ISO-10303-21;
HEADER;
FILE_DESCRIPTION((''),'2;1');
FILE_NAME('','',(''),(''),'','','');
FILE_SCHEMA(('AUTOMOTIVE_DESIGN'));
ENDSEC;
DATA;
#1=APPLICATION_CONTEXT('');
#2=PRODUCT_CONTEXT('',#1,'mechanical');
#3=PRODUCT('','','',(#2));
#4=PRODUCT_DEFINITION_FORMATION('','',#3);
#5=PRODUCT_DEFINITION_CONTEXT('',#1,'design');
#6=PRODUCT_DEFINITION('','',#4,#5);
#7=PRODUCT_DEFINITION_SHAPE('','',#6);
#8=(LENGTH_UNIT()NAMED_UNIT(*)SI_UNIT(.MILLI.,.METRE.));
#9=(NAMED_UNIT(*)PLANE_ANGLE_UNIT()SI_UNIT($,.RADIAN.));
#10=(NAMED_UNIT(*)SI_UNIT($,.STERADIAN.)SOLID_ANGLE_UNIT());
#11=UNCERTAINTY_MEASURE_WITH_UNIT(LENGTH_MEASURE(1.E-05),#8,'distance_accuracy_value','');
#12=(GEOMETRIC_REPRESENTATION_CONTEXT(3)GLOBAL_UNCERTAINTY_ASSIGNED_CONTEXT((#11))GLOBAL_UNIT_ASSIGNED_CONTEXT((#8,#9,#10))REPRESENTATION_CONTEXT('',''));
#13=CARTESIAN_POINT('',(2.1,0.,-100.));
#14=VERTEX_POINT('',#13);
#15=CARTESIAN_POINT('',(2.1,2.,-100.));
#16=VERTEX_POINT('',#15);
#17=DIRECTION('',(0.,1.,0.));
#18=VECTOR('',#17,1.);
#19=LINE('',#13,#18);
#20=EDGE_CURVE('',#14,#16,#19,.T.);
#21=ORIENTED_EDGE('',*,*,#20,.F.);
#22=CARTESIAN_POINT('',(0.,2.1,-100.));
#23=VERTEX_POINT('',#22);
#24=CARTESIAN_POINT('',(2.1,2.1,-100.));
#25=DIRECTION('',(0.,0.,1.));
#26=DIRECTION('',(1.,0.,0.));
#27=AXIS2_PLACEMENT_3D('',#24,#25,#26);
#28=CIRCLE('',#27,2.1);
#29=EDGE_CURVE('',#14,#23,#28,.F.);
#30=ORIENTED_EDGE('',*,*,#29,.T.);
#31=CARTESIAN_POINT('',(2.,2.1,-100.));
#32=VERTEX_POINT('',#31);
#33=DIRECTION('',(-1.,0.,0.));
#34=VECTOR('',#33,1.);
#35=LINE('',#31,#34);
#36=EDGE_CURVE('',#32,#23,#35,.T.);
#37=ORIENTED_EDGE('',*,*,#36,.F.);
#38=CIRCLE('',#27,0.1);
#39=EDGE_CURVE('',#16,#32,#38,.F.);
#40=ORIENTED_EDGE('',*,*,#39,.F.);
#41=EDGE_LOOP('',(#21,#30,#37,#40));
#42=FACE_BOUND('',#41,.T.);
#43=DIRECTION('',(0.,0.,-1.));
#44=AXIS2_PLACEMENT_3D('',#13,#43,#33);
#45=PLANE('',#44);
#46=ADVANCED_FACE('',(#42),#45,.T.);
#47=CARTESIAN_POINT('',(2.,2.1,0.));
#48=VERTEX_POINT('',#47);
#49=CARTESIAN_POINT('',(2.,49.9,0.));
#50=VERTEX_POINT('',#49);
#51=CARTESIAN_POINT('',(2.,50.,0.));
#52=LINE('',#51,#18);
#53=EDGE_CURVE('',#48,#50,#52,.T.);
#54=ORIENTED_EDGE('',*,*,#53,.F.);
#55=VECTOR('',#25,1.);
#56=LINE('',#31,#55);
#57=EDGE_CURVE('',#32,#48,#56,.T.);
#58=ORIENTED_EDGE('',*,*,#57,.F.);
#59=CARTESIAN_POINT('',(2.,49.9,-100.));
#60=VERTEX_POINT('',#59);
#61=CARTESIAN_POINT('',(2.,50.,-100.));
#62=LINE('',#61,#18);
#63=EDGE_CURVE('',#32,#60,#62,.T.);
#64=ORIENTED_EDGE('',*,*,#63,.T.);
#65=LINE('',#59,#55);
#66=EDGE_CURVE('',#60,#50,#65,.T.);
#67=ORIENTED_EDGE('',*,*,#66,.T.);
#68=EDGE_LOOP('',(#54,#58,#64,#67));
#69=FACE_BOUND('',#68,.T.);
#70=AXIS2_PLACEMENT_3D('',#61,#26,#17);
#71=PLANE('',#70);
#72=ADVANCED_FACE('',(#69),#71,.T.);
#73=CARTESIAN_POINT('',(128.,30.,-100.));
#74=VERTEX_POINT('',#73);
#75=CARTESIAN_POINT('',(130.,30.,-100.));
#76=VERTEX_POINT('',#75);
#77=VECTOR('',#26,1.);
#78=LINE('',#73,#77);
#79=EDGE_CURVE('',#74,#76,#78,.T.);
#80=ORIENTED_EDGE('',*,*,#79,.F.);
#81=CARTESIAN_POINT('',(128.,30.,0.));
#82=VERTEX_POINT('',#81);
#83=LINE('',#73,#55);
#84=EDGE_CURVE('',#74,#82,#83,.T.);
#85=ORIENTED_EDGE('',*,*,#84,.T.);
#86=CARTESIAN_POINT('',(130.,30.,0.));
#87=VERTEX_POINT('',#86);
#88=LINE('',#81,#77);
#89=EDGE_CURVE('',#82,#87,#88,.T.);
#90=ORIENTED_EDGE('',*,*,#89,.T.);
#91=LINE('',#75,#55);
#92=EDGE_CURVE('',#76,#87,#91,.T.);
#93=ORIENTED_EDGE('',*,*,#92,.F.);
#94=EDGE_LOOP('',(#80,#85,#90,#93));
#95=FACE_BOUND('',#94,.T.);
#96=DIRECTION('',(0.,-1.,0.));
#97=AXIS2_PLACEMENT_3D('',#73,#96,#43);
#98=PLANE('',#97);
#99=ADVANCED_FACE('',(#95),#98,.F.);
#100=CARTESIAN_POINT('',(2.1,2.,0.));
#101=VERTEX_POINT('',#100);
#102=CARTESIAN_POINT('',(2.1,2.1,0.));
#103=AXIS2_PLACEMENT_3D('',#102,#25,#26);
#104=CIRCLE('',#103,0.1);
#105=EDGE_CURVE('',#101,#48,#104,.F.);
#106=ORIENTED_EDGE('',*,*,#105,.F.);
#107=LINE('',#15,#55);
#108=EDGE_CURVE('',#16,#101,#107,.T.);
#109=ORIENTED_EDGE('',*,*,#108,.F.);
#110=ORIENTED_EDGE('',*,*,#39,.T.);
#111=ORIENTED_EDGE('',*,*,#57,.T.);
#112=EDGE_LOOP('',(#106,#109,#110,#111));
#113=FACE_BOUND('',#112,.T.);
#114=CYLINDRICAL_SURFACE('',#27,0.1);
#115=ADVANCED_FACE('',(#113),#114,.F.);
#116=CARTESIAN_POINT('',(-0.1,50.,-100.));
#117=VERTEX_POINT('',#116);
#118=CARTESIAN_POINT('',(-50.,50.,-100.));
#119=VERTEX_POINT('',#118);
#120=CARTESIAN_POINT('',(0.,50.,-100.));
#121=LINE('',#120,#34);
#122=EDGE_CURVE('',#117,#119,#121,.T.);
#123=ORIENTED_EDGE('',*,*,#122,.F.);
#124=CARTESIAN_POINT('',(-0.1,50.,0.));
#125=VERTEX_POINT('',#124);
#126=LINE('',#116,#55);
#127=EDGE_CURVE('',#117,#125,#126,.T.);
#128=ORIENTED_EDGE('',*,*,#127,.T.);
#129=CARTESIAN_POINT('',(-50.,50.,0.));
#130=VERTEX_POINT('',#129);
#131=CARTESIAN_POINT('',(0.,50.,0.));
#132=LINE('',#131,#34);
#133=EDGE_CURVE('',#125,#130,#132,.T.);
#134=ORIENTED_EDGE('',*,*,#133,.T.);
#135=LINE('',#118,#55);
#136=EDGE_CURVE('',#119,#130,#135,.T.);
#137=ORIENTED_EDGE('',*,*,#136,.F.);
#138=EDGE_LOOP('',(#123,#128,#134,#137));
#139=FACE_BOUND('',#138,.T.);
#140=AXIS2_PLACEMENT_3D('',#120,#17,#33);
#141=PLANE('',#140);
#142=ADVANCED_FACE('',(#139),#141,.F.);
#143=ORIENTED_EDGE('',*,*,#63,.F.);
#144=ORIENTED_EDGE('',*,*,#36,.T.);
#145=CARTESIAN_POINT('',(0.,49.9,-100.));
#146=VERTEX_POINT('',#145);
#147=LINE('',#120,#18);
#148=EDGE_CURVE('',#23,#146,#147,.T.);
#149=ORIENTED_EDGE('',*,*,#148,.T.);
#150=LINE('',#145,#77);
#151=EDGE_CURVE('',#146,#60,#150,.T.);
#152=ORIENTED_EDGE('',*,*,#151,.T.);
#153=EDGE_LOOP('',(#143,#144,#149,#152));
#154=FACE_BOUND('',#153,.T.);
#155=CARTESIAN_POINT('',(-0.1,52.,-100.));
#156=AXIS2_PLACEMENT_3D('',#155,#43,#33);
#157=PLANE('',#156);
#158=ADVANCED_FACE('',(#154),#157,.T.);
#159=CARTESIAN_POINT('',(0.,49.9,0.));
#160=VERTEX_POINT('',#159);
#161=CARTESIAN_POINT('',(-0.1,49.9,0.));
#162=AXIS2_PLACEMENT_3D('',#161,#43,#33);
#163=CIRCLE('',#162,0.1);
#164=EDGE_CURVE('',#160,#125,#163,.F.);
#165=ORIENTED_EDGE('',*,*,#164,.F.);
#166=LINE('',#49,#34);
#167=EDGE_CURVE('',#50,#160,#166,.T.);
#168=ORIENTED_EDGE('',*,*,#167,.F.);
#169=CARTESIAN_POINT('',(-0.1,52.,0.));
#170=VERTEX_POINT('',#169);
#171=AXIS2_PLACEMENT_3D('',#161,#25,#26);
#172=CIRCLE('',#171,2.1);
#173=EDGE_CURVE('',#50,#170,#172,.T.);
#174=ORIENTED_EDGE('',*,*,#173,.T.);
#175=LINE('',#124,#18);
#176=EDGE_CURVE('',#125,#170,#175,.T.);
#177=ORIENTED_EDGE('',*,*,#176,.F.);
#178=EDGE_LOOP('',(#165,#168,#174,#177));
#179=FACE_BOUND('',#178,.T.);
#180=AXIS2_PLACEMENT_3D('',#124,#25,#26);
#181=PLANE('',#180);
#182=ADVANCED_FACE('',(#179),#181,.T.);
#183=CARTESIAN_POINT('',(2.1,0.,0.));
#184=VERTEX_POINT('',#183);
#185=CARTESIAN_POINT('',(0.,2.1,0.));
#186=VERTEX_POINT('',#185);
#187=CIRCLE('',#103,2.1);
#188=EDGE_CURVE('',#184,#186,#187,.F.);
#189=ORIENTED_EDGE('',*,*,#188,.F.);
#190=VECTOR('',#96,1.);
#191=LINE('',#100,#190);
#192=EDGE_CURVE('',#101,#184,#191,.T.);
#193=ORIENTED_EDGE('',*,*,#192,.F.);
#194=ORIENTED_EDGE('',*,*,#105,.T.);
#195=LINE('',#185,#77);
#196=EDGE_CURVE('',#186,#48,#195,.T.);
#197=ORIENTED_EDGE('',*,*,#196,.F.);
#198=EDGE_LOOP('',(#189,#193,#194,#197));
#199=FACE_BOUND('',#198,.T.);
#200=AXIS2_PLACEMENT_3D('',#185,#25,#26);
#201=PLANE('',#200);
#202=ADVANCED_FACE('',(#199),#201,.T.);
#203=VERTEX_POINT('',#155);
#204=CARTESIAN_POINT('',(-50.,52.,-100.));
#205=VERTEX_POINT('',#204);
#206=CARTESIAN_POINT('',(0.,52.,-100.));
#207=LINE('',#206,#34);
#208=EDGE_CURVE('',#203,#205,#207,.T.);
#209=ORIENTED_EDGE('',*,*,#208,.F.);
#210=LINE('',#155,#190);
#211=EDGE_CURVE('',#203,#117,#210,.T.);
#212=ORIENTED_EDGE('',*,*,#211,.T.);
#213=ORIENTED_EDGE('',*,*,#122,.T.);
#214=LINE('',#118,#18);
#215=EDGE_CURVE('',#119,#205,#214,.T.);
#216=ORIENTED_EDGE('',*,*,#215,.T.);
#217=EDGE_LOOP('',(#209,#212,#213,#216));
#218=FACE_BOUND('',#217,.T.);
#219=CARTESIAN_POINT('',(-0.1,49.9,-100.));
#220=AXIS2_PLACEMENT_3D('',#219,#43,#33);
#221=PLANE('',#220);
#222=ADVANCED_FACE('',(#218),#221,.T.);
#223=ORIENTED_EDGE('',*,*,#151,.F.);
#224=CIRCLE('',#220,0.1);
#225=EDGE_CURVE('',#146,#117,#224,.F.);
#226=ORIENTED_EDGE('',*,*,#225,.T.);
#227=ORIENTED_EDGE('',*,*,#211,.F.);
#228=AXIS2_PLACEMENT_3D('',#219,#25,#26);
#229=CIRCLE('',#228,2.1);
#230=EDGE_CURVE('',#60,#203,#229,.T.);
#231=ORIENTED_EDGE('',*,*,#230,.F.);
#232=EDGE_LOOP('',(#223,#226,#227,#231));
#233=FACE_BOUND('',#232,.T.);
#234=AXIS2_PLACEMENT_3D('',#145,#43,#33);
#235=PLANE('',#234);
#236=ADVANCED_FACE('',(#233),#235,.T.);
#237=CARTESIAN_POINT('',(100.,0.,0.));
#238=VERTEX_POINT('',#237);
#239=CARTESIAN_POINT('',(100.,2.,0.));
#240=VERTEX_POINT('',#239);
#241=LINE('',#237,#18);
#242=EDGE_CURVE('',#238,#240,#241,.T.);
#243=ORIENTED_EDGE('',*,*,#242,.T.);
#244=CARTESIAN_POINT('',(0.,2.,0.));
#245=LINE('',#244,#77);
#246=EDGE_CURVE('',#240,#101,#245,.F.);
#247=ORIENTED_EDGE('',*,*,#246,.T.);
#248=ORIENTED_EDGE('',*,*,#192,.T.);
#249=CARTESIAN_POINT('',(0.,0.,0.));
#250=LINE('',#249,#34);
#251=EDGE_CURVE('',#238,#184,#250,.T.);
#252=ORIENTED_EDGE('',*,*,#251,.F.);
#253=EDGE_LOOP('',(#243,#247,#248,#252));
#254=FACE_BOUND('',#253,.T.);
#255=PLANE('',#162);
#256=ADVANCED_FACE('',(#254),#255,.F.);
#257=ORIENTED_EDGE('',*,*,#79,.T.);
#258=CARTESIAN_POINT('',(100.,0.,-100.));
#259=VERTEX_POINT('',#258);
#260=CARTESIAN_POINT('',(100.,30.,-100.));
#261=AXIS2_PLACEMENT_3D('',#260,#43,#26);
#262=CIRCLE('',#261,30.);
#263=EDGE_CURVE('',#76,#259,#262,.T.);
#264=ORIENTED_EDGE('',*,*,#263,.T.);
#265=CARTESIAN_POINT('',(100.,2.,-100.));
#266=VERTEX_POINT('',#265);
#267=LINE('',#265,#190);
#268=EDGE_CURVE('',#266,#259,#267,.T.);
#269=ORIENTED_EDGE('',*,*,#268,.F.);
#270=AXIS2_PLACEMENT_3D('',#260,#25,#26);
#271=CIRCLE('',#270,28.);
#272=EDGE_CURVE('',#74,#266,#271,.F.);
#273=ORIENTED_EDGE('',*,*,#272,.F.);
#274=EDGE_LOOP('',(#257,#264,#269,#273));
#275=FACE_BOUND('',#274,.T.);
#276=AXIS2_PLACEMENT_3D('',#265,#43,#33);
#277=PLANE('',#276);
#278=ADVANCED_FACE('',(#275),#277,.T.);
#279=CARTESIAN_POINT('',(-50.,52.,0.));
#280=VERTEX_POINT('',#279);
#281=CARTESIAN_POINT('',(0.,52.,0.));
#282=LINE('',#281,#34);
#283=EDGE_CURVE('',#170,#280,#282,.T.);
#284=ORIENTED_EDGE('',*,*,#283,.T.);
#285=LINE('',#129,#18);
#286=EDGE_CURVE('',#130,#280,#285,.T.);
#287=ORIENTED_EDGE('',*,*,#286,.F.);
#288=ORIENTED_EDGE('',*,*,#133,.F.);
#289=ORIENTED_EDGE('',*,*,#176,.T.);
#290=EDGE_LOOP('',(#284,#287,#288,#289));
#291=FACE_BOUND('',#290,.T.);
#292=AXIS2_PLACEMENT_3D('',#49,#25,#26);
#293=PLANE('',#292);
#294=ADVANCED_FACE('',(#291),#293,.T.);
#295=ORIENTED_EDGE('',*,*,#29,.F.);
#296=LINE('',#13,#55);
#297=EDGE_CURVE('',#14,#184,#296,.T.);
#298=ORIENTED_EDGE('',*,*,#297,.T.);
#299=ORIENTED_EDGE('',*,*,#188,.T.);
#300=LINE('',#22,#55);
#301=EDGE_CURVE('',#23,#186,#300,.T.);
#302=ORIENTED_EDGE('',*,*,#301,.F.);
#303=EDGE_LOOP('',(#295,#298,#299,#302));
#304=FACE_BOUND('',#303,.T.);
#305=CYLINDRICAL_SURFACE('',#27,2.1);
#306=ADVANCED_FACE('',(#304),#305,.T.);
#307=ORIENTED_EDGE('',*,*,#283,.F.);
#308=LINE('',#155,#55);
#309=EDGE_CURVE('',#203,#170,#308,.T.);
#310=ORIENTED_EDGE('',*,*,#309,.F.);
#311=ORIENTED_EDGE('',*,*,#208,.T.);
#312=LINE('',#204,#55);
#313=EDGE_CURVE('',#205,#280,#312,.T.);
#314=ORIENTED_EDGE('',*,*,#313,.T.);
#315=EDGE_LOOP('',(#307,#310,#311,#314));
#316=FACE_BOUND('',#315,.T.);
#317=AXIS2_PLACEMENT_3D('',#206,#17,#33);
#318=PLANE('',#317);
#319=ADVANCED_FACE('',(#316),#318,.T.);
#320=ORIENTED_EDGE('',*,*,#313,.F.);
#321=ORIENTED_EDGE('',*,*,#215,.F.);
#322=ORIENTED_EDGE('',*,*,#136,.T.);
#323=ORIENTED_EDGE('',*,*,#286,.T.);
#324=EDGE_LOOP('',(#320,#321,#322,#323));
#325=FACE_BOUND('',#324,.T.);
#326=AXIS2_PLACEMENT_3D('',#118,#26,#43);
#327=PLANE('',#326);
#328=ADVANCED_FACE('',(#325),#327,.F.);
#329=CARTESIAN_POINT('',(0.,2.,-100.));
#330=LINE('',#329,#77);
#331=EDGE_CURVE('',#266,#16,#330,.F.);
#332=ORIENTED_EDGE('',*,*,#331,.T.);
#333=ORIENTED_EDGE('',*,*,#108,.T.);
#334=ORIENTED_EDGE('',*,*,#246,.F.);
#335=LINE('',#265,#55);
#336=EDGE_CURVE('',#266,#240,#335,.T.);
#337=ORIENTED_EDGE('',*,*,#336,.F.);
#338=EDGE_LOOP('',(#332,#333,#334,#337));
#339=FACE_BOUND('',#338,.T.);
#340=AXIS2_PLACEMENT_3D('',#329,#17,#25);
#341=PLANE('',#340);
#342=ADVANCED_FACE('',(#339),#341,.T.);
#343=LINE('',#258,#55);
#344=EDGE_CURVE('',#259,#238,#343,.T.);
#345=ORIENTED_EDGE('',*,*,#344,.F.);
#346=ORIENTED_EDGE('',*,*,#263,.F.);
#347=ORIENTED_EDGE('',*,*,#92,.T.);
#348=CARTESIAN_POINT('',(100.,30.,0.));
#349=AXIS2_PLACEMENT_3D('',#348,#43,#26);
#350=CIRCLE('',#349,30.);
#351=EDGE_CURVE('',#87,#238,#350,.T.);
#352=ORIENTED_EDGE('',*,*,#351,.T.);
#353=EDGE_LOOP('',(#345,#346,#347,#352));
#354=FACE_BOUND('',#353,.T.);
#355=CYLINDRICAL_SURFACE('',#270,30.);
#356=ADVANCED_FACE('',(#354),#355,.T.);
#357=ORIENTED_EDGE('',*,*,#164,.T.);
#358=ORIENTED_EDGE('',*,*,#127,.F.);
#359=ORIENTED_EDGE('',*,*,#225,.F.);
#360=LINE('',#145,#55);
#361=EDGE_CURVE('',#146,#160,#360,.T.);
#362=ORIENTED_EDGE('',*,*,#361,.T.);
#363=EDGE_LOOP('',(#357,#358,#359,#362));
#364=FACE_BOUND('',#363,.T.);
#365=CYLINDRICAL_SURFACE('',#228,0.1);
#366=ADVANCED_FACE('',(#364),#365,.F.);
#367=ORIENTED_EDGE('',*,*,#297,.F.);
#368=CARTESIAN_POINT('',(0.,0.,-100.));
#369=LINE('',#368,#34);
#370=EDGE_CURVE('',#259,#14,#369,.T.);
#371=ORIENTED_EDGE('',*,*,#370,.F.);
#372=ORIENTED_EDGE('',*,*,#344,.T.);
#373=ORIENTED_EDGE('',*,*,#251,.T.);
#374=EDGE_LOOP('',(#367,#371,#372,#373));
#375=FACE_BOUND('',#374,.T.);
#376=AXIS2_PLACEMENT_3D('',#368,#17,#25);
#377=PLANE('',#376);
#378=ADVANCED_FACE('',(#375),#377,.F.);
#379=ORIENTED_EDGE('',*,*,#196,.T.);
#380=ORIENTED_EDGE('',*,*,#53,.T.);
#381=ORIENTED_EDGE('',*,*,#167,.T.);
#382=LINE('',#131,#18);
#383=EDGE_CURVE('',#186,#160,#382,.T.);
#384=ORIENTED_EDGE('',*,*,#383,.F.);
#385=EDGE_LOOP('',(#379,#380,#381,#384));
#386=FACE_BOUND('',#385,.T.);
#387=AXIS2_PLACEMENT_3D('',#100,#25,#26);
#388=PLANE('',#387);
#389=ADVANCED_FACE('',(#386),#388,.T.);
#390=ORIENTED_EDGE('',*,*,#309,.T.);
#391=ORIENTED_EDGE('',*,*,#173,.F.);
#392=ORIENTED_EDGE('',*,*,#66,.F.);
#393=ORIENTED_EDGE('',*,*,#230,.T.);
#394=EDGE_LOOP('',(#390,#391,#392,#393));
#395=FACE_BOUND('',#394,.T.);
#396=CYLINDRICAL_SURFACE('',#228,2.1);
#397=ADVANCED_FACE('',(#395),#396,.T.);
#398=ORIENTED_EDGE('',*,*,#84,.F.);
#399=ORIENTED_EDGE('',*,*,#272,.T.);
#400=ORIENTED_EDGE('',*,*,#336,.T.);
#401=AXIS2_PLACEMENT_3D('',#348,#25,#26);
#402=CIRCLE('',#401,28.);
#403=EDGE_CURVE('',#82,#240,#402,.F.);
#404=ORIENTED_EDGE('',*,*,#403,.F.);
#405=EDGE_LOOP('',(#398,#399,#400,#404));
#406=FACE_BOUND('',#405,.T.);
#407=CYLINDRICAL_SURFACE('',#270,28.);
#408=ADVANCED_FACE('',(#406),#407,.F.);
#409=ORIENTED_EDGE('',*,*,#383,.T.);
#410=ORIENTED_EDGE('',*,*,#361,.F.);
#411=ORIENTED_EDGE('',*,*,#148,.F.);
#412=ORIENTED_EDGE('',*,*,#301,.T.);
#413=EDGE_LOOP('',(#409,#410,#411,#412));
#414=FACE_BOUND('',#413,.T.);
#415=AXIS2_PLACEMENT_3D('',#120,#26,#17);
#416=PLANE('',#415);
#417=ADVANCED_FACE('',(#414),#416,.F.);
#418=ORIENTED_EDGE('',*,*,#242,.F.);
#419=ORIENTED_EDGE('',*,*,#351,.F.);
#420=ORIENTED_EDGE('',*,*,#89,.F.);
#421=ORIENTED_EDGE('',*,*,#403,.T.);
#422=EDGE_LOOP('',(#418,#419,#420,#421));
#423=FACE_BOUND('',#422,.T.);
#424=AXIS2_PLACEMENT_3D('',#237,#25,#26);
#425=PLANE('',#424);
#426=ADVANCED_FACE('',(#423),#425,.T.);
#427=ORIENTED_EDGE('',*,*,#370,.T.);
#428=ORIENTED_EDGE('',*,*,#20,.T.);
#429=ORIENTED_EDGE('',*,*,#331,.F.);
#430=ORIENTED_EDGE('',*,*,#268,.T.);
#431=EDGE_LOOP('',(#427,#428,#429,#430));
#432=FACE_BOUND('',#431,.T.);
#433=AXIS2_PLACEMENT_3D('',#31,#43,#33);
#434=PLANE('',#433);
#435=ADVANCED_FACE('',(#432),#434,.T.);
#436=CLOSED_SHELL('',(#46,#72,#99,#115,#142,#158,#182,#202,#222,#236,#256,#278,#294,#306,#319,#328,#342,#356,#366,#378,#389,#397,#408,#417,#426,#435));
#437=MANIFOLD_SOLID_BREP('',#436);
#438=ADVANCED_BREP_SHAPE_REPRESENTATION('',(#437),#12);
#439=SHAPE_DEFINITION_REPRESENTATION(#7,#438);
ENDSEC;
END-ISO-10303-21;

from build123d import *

# Parameters (mm, degrees)
SM_BASE_FLANGE_1_DEPTH = 100


# Sheet-metal steps are written as plain solids
with BuildPart() as part:
    # Sketch 1 → 基体-法兰1 (new body)
    with BuildSketch(Plane.XY):
        with BuildLine():
            Line((-50, 50), (-0.1, 50))
            ThreePointArc((-0.1, 50), (-0.029289322, 49.970710678), (0, 49.9))
            Line((0, 49.9), (0, 2.1))
            ThreePointArc((0, 2.1), (0.61507576, 0.61507576), (2.1, 0))
            Line((2.1, 0), (100, 0))
            ThreePointArc((100, 0), (121.213203436, 8.786796564), (130, 30))
            Line((130, 30), (128, 30))
            ThreePointArc((128, 30), (119.798989873, 10.201010127), (100, 2))
            Line((100, 2), (2.1, 2))
            ThreePointArc((2.1, 2), (2.029289322, 2.029289322), (2, 2.1))
            Line((2, 2.1), (2, 49.9))
            ThreePointArc((2, 49.9), (1.384924241, 51.38492424), (-0.1, 52))
            Line((-0.1, 52), (-50, 52))
            Line((-50, 52), (-50, 50))
        make_face()
    extrude(amount=-SM_BASE_FLANGE_1_DEPTH)


solid = part.part
